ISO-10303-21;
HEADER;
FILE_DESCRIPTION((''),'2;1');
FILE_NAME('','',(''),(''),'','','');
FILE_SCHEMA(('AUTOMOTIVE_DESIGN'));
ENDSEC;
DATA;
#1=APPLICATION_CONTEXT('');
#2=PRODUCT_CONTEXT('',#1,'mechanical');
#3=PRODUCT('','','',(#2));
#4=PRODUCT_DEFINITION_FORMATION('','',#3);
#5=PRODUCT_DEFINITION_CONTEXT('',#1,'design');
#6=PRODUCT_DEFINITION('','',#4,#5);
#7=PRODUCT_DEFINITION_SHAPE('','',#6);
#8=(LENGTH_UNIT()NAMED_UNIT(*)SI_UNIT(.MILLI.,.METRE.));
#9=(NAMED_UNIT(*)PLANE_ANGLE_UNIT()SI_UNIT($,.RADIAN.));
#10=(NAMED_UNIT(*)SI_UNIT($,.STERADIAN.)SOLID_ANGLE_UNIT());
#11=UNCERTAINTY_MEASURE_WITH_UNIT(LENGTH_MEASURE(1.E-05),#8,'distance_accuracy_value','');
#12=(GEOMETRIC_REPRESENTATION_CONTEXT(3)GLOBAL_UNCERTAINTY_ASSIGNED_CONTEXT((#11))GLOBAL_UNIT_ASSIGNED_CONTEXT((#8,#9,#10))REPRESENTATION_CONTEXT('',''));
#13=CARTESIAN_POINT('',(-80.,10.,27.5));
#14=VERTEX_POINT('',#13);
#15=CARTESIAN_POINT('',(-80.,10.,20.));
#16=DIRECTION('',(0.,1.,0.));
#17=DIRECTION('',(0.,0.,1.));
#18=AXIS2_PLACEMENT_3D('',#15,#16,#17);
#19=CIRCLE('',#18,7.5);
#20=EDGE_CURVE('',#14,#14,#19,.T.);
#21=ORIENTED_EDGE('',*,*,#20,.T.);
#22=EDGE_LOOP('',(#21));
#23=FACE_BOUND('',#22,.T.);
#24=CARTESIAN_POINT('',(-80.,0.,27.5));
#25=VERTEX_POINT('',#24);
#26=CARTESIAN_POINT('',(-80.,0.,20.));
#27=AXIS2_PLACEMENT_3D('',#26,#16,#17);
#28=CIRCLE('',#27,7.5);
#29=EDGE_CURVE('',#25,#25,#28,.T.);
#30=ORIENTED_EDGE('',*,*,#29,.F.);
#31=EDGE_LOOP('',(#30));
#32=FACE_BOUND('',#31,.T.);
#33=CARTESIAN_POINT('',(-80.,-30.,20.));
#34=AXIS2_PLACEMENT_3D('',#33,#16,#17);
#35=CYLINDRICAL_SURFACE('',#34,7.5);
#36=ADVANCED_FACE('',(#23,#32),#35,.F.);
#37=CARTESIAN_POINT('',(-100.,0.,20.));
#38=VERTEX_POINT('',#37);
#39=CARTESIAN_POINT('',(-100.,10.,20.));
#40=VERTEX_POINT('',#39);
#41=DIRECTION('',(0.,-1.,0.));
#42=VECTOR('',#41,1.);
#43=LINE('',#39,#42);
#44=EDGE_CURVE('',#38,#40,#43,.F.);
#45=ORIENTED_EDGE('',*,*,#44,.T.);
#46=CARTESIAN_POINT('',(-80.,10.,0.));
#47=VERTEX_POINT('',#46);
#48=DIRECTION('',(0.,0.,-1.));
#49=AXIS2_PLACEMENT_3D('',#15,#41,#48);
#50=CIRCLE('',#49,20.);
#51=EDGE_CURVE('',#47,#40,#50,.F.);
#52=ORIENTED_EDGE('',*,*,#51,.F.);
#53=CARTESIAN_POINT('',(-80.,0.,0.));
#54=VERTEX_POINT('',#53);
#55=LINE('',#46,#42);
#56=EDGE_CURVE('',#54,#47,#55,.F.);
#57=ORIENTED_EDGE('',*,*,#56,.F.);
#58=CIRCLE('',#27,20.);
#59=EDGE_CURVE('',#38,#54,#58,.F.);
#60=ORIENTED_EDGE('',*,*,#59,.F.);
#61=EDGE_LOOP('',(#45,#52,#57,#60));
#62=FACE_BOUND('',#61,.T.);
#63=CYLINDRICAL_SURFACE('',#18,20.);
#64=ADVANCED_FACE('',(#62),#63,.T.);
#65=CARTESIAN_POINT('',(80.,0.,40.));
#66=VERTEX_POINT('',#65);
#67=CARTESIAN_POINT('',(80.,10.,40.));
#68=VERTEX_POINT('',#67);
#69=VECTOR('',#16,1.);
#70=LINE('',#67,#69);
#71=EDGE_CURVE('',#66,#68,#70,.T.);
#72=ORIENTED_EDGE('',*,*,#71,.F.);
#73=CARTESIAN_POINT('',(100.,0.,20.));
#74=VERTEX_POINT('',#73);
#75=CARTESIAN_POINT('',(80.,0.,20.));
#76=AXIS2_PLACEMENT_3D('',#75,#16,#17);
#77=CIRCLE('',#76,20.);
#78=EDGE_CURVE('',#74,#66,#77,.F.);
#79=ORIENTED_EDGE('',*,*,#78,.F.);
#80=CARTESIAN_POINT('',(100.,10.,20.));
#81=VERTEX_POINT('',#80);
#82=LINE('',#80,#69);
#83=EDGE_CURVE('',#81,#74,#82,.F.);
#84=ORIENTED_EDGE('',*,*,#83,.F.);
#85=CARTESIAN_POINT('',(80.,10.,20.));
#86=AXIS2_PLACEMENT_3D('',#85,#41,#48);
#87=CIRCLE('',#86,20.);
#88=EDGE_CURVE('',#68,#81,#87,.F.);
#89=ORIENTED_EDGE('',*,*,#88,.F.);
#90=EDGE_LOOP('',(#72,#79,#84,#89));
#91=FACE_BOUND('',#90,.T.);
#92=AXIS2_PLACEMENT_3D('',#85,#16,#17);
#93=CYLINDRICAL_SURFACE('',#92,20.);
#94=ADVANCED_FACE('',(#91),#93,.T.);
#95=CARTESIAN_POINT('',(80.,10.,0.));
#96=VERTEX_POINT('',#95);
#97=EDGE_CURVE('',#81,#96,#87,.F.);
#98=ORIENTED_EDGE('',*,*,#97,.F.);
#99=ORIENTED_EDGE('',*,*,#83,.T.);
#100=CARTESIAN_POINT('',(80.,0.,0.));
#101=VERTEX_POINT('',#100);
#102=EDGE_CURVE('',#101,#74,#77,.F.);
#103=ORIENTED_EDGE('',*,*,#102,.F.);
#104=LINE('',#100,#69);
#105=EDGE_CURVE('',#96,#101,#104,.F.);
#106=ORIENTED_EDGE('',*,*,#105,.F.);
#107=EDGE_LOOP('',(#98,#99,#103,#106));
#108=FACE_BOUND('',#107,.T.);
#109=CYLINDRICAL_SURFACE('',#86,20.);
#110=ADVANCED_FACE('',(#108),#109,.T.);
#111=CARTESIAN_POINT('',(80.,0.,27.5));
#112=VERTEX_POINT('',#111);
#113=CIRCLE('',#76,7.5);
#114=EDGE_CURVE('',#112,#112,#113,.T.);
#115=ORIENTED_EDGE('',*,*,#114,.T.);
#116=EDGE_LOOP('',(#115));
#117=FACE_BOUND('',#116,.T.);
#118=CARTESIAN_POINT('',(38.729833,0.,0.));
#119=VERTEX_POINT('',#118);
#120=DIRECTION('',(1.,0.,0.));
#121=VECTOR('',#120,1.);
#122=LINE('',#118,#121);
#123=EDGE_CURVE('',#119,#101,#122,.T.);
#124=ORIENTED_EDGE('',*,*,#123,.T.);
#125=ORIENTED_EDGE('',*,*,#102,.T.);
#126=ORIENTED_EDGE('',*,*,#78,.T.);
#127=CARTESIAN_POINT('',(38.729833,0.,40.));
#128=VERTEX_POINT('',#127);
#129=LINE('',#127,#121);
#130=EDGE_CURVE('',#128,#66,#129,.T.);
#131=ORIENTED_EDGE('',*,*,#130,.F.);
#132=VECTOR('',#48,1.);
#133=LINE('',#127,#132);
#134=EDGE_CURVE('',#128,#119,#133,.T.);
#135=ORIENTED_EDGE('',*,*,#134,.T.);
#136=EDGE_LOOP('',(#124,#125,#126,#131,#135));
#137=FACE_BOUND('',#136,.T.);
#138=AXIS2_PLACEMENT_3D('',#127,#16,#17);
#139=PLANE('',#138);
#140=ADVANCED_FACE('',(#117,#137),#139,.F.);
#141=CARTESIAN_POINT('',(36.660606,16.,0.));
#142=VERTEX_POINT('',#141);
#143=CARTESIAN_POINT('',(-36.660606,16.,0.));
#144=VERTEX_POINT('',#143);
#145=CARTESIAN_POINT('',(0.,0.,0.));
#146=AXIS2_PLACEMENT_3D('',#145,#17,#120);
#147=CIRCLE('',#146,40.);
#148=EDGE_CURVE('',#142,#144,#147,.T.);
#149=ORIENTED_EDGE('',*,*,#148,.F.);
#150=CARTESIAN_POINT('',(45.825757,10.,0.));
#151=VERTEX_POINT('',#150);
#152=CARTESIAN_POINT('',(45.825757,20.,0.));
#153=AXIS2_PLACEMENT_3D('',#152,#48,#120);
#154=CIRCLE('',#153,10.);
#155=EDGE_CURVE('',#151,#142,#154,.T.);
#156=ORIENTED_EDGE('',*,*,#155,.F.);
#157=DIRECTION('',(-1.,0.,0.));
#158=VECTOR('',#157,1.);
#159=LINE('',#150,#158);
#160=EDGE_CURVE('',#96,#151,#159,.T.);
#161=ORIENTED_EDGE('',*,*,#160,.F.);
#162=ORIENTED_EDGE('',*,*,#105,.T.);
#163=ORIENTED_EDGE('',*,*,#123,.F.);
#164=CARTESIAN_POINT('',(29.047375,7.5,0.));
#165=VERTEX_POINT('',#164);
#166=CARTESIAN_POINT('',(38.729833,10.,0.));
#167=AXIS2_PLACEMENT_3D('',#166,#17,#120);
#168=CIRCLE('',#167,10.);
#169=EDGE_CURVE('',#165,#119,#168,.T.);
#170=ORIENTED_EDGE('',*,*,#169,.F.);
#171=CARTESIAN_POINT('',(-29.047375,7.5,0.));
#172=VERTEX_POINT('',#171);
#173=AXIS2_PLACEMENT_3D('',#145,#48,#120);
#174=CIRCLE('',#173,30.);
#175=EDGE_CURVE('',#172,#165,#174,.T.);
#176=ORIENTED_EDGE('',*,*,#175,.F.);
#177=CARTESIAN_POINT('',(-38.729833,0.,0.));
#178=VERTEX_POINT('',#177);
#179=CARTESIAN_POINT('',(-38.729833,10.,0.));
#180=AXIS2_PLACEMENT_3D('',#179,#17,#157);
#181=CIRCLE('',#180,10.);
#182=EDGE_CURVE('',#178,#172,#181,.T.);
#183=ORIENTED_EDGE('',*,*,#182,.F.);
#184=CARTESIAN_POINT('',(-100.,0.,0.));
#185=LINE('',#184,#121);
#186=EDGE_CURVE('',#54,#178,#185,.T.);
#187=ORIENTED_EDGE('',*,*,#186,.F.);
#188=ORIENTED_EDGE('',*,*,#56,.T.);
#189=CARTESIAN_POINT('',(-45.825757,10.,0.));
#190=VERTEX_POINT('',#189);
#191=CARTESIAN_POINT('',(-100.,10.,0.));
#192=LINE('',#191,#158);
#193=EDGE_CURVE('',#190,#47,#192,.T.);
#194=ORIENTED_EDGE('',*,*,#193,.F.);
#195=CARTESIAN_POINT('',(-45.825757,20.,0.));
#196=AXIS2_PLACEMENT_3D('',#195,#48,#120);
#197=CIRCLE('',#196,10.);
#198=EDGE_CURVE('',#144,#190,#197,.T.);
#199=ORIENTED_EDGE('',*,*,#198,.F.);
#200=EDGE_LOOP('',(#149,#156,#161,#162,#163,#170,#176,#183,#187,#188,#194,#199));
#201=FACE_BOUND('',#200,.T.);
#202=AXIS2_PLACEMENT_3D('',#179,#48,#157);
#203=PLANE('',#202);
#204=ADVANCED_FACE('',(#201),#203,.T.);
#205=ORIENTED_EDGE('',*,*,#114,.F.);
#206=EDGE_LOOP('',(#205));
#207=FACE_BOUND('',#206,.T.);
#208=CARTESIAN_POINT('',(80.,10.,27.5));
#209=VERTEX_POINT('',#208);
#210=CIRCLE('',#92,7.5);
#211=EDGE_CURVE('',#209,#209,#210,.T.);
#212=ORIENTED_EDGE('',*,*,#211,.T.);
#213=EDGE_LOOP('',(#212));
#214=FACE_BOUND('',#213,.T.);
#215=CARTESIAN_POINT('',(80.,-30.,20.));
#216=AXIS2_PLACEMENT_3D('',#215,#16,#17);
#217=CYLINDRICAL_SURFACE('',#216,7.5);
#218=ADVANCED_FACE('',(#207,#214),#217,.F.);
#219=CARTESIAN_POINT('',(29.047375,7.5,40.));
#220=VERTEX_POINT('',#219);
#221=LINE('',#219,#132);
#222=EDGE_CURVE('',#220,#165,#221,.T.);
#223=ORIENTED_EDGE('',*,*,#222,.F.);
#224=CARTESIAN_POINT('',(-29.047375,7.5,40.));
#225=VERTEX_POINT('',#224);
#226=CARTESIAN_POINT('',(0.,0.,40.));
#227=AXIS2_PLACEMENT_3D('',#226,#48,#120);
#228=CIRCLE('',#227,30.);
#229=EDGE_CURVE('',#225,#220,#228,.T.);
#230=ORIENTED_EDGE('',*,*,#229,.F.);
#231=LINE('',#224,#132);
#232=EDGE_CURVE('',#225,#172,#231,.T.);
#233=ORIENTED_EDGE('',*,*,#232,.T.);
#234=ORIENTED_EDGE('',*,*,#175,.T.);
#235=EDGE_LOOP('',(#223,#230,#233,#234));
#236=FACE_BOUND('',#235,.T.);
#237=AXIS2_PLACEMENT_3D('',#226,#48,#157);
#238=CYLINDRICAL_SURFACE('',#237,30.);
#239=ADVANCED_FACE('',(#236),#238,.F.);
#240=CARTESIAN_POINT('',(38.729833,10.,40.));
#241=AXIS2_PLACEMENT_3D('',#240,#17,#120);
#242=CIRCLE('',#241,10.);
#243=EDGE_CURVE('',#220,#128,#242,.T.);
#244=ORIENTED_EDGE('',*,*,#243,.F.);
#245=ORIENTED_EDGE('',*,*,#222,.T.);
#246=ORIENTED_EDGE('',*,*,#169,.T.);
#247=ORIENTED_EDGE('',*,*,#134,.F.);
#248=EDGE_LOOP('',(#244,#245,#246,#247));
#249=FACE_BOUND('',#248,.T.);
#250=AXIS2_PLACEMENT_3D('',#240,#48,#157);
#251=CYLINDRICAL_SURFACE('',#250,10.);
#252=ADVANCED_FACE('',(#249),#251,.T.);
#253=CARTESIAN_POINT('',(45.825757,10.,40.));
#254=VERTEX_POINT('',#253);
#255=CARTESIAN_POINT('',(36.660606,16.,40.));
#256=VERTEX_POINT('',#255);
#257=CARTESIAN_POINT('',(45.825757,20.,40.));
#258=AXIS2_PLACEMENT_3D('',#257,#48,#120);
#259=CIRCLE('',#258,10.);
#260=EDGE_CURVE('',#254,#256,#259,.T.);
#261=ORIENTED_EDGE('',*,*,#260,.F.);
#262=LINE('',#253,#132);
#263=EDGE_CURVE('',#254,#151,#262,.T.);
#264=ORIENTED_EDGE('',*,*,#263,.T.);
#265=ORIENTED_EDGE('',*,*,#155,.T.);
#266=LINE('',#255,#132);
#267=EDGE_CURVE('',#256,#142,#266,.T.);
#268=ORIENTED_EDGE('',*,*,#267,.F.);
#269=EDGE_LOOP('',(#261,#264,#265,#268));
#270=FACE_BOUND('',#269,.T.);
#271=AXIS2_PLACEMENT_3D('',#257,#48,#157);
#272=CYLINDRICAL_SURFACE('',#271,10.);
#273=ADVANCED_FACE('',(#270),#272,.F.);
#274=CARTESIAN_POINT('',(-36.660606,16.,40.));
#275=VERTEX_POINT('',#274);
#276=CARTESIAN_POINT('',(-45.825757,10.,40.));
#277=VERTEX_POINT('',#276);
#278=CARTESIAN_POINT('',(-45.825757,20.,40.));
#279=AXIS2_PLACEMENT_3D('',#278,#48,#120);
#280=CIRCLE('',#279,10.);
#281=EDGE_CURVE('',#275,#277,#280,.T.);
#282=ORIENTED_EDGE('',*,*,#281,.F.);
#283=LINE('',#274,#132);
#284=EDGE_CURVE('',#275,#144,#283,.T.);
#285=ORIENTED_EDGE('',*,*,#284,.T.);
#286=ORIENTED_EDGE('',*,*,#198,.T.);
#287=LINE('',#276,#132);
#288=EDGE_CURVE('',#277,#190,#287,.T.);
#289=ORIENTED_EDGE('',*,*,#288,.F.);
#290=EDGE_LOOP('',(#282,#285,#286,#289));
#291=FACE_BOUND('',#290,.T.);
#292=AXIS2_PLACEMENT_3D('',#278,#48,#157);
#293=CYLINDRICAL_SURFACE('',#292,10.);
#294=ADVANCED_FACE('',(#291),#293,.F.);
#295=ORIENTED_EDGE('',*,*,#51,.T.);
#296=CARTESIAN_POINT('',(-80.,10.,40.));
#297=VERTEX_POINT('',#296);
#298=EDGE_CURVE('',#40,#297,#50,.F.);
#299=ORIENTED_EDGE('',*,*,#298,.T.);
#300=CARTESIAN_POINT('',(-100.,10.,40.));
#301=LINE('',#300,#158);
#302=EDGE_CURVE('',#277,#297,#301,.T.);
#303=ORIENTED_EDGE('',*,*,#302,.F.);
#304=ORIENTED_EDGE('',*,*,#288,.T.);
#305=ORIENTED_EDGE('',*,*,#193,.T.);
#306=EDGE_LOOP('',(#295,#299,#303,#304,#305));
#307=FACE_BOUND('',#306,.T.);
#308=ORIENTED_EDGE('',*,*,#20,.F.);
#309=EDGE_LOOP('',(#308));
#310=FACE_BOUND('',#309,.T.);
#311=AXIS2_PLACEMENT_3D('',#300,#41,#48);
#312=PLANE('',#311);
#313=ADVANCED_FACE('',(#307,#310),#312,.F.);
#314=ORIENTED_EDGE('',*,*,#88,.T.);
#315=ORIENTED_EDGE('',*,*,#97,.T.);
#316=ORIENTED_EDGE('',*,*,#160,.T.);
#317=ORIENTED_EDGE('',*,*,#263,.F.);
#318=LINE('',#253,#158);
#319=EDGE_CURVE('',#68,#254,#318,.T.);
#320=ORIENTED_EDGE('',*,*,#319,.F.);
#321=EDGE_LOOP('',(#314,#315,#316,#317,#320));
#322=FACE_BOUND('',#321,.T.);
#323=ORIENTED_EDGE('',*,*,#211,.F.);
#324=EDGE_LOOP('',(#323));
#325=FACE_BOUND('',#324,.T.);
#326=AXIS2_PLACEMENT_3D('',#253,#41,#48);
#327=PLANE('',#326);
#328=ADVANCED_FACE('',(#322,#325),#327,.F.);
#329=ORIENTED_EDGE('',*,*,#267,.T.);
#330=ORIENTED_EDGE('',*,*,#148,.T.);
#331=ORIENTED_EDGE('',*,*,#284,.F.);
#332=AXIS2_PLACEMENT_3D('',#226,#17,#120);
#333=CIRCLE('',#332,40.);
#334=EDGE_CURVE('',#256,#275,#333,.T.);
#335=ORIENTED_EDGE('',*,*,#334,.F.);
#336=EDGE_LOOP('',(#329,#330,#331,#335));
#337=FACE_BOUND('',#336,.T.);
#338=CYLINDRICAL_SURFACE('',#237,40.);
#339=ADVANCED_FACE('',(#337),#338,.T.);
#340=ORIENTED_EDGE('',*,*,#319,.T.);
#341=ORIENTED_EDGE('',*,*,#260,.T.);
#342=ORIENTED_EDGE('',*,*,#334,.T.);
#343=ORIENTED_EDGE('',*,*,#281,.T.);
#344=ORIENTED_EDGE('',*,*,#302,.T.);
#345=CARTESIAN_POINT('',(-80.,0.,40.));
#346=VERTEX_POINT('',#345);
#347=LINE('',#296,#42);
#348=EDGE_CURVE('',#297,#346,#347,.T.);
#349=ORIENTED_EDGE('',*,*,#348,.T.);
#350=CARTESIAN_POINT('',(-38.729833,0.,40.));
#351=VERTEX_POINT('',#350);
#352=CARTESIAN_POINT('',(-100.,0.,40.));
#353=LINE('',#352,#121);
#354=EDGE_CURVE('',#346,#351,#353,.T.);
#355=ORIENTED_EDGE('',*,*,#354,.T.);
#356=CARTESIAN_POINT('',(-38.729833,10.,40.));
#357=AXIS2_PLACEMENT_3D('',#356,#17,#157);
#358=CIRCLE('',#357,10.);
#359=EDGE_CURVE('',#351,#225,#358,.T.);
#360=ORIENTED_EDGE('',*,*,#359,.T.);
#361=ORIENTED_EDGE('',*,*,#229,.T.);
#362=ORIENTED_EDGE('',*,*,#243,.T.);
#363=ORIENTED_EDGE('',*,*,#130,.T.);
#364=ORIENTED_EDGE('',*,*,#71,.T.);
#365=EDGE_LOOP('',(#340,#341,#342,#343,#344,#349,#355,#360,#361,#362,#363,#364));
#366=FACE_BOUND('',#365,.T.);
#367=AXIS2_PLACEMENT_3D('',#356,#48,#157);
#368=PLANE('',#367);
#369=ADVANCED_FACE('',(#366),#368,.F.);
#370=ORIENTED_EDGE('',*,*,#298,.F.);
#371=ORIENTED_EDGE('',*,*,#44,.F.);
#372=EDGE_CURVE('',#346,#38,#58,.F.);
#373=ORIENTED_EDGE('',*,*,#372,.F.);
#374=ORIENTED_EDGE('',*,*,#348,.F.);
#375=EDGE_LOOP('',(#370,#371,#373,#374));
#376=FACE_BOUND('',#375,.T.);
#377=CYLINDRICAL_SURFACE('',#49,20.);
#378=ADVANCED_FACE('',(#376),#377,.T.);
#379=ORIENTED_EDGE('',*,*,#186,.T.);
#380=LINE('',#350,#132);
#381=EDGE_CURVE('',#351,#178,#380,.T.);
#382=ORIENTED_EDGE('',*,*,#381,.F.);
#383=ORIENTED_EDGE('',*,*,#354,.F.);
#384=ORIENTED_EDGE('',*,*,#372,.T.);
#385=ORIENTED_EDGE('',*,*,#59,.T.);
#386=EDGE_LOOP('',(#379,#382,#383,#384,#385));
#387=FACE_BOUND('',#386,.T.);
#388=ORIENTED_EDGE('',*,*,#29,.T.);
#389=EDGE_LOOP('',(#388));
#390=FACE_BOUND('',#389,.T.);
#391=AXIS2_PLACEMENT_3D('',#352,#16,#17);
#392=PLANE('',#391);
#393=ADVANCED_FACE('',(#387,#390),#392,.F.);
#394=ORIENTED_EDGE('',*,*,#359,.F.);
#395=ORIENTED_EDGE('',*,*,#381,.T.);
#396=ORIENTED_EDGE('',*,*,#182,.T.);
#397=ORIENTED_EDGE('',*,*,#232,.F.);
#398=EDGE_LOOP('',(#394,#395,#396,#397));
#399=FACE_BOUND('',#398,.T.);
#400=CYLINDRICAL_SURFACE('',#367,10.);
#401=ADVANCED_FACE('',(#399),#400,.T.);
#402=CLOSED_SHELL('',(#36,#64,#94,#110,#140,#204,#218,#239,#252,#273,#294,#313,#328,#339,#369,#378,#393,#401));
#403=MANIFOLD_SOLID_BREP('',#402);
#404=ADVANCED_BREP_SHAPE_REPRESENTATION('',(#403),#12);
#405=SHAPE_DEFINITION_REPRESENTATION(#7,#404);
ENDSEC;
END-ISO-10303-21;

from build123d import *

# Parameters (mm, degrees)
BOSS_EXTRUDE1_DEPTH = 40
FILLET1_R           = 20
SKETCH2_R           = 7.5
CUT_EXTRUDE1_DEPTH  = 40


with BuildPart() as part:
    # Sketch1 → Boss-Extrude1 (new body)
    with BuildSketch(Plane.XY):
        with BuildLine():
            Line((-100, 0), (-38.729833462, 0))
            ThreePointArc((-38.729833462, 0), (-32.606109105, 2.09430585), (-29.047375097, 7.5))
            ThreePointArc((-29.047375097, 7.5), (0, 30), (29.047375097, 7.5))
            ThreePointArc((29.047375097, 7.5), (32.606109105, 2.09430585), (38.729833462, 0))
            Line((38.729833462, 0), (100, 0))
            Line((100, 0), (100, 10))
            Line((100, 10), (45.82575695, 10))
            ThreePointArc((45.82575695, 10), (40.348531375, 11.633399735), (36.66060556, 16))
            ThreePointArc((36.66060556, 16), (0, 40), (-36.66060556, 16))
            ThreePointArc((-36.66060556, 16), (-40.348531375, 11.633399735), (-45.82575695, 10))
            Line((-45.82575695, 10), (-100, 10))
            Line((-100, 10), (-100, 0))
        make_face()
    extrude(amount=BOSS_EXTRUDE1_DEPTH)

    # Fillet1
    fillet1_edges = [part.edges().sort_by_distance(p)[0] for p in [
        (100, 5, 0),
        (100, 5, 40),
        (-100, 5, 0),
        (-100, 5, 40),
    ]]
    fillet(fillet1_edges, radius=FILLET1_R - 0.0001)  # a hair under: the kernel refuses the full size

    # Sketch2 → Cut-Extrude1 (cut)
    with BuildSketch(Plane(origin=(0, 10, 0), x_dir=(1, 0, 0), z_dir=(0, 1, 0))):
        with Locations(Location((-80, -20, 0), (0, 0, 270))):
            Circle(SKETCH2_R)
        with Locations(Location((80, -20, 0), (0, 0, 270))):
            Circle(SKETCH2_R)
    extrude(amount=-CUT_EXTRUDE1_DEPTH, mode=Mode.SUBTRACT)


solid = part.part
